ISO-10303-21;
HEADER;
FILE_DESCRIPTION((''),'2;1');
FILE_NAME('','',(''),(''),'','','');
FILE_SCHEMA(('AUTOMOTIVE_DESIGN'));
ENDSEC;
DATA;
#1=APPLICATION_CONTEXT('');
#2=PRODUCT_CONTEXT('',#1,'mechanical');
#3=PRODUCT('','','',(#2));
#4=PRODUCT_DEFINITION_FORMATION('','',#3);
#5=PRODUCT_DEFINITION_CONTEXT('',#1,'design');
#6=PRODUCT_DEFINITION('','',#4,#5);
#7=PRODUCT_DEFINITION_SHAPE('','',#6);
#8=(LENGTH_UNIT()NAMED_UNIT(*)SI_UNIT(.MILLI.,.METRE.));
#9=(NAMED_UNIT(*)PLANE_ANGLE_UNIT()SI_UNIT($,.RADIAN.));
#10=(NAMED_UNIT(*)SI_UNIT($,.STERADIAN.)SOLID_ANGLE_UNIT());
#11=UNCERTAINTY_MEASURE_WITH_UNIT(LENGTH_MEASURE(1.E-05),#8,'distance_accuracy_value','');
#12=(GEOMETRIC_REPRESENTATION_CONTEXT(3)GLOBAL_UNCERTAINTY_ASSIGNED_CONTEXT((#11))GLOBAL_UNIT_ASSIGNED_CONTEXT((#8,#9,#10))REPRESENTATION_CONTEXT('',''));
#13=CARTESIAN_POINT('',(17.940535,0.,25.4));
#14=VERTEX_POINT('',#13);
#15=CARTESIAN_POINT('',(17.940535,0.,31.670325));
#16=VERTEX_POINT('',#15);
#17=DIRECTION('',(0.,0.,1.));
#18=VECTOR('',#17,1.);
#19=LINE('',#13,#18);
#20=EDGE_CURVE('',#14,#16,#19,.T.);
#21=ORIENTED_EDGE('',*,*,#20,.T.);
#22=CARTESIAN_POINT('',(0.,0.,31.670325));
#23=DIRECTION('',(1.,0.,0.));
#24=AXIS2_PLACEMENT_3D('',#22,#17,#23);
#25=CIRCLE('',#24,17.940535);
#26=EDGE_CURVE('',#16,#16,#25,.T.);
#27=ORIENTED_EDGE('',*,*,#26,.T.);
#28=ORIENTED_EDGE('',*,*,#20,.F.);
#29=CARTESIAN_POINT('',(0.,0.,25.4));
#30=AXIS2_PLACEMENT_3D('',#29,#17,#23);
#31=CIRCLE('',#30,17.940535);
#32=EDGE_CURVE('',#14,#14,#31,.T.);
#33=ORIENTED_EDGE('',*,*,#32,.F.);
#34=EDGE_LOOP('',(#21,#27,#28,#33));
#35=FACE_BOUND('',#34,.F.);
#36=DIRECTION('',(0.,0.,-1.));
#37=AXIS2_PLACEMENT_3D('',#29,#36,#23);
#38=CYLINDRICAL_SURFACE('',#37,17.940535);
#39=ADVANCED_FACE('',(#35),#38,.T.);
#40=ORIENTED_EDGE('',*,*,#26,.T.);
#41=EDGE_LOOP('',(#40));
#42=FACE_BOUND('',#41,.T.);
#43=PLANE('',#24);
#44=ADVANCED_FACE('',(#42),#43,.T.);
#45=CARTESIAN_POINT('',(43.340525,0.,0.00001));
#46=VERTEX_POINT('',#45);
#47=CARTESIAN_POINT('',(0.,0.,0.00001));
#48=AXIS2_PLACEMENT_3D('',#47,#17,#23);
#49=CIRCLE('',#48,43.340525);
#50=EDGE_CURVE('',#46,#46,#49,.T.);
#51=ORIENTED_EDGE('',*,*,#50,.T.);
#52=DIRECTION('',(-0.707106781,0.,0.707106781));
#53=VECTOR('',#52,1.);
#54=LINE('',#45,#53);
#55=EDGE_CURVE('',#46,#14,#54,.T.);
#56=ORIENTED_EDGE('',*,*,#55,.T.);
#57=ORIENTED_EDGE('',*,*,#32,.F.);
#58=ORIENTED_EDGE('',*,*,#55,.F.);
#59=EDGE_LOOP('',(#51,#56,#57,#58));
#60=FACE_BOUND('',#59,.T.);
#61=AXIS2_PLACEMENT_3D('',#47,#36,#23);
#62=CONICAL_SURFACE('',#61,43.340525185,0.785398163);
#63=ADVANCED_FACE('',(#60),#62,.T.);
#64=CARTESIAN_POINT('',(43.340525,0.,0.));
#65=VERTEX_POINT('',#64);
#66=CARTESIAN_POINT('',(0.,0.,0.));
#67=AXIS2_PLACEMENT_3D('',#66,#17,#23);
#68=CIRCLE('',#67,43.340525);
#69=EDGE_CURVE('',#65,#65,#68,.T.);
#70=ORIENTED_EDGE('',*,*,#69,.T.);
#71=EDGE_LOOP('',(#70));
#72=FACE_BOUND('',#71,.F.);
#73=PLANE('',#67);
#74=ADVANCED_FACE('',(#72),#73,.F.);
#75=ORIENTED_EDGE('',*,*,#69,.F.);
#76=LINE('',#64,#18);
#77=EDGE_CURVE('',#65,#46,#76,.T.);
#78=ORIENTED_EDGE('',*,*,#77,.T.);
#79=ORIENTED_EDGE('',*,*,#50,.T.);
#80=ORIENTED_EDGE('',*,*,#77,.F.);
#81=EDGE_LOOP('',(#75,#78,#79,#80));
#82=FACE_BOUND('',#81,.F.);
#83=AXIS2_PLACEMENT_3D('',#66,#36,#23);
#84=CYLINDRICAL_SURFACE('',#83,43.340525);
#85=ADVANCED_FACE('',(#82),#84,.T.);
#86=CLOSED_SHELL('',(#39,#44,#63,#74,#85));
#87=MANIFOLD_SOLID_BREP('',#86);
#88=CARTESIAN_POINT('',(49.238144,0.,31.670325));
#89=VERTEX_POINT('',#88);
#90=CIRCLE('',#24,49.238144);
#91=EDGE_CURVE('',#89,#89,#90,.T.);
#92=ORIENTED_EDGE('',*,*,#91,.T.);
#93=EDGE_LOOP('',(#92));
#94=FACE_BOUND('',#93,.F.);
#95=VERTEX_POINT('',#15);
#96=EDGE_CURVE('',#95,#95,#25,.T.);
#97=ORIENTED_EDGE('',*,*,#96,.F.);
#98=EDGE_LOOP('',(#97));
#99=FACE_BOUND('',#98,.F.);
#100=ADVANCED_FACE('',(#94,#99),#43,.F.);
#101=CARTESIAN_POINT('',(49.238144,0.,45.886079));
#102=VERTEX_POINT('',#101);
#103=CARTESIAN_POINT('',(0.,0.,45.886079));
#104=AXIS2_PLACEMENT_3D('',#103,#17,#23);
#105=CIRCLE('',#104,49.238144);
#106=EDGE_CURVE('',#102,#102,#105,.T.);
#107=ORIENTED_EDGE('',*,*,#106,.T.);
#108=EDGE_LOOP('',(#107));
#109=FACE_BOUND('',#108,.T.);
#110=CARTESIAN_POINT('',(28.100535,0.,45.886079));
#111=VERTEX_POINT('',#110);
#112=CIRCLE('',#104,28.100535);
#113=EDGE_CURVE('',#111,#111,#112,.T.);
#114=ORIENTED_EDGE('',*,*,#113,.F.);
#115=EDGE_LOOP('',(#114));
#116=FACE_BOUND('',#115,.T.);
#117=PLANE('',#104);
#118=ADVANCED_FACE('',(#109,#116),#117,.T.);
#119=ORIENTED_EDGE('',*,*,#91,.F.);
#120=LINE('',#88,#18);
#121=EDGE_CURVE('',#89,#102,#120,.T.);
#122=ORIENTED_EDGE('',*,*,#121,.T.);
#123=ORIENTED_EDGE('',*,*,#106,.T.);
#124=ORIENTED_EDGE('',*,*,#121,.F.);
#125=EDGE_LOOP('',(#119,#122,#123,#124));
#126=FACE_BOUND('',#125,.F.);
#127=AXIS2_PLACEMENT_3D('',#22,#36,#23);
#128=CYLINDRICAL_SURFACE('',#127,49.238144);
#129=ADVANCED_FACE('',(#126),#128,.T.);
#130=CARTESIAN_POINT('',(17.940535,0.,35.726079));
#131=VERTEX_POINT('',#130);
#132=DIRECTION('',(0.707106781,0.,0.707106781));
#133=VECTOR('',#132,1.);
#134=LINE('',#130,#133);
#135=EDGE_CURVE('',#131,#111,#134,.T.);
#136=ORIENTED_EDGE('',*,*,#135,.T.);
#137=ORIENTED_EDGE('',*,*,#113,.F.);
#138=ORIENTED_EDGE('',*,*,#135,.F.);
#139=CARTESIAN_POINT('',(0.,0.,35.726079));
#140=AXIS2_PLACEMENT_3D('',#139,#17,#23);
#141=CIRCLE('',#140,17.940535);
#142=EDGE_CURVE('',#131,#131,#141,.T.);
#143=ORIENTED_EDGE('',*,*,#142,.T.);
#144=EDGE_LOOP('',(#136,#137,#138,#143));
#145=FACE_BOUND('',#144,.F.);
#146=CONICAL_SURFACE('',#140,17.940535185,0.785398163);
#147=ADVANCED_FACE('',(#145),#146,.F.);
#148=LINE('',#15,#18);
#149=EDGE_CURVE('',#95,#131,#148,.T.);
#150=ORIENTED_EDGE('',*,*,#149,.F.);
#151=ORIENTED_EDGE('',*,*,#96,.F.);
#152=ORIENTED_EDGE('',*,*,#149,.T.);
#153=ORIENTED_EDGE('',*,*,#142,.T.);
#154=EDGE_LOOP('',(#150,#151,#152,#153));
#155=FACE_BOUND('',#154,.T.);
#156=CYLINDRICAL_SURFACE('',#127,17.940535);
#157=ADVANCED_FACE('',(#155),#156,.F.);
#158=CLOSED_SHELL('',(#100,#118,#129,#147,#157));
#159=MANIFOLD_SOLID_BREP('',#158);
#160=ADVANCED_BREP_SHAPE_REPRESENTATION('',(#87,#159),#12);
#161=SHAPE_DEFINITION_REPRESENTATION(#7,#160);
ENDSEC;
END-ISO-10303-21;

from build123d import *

# Parameters (mm, degrees)
F0_R     = 43.3405251853
F1_DEPTH = 25.4
F2_SIZE  = 25.39999
F3_DEPTH = 6.2703248113
F4_R     = 49.2381441728
F4_R_2   = 17.9405351853
F5_DEPTH = 14.2157543451
F6_SIZE  = 10.16


# Not quite as in the source:
# - a fillet or chamfer is up to 0.001 mm smaller than in the source, because OpenCascade refuses the exact size


with BuildPart() as f1:
    # F0 (on Top) → F1 (new body)
    with BuildSketch(Plane.XY):
        Circle(F0_R)
    extrude(amount=F1_DEPTH)

    # F2 (size 25.4 in the source; OpenCascade refuses exactly that, so slightly less here)
    f2_edges = [f1.edges().sort_by_distance(p)[0] for p in [
        (-43.340525, 0, 25.4),
    ]]
    chamfer(f2_edges, length=F2_SIZE)

    # F3 (add): a face of the model
    f3_faces = [f1.faces().sort_by_distance(p)[0] for p in [
        (0, 0, 25.4),
    ]]
    extrude(f3_faces, amount=F3_DEPTH)


with BuildPart() as f5:
    # F4 (on face) → F5 (new body)
    with BuildSketch(Plane.XY.offset(31.6703248113)):
        Circle(F4_R)
        Circle(F4_R_2, mode=Mode.SUBTRACT)
    extrude(amount=F5_DEPTH)

    # F6
    f6_edges = [f5.edges().sort_by_distance(p)[0] for p in [
        (-17.940535, 0, 45.886079),
    ]]
    chamfer(f6_edges, length=F6_SIZE)


solid = Compound([f1.part, f5.part])
